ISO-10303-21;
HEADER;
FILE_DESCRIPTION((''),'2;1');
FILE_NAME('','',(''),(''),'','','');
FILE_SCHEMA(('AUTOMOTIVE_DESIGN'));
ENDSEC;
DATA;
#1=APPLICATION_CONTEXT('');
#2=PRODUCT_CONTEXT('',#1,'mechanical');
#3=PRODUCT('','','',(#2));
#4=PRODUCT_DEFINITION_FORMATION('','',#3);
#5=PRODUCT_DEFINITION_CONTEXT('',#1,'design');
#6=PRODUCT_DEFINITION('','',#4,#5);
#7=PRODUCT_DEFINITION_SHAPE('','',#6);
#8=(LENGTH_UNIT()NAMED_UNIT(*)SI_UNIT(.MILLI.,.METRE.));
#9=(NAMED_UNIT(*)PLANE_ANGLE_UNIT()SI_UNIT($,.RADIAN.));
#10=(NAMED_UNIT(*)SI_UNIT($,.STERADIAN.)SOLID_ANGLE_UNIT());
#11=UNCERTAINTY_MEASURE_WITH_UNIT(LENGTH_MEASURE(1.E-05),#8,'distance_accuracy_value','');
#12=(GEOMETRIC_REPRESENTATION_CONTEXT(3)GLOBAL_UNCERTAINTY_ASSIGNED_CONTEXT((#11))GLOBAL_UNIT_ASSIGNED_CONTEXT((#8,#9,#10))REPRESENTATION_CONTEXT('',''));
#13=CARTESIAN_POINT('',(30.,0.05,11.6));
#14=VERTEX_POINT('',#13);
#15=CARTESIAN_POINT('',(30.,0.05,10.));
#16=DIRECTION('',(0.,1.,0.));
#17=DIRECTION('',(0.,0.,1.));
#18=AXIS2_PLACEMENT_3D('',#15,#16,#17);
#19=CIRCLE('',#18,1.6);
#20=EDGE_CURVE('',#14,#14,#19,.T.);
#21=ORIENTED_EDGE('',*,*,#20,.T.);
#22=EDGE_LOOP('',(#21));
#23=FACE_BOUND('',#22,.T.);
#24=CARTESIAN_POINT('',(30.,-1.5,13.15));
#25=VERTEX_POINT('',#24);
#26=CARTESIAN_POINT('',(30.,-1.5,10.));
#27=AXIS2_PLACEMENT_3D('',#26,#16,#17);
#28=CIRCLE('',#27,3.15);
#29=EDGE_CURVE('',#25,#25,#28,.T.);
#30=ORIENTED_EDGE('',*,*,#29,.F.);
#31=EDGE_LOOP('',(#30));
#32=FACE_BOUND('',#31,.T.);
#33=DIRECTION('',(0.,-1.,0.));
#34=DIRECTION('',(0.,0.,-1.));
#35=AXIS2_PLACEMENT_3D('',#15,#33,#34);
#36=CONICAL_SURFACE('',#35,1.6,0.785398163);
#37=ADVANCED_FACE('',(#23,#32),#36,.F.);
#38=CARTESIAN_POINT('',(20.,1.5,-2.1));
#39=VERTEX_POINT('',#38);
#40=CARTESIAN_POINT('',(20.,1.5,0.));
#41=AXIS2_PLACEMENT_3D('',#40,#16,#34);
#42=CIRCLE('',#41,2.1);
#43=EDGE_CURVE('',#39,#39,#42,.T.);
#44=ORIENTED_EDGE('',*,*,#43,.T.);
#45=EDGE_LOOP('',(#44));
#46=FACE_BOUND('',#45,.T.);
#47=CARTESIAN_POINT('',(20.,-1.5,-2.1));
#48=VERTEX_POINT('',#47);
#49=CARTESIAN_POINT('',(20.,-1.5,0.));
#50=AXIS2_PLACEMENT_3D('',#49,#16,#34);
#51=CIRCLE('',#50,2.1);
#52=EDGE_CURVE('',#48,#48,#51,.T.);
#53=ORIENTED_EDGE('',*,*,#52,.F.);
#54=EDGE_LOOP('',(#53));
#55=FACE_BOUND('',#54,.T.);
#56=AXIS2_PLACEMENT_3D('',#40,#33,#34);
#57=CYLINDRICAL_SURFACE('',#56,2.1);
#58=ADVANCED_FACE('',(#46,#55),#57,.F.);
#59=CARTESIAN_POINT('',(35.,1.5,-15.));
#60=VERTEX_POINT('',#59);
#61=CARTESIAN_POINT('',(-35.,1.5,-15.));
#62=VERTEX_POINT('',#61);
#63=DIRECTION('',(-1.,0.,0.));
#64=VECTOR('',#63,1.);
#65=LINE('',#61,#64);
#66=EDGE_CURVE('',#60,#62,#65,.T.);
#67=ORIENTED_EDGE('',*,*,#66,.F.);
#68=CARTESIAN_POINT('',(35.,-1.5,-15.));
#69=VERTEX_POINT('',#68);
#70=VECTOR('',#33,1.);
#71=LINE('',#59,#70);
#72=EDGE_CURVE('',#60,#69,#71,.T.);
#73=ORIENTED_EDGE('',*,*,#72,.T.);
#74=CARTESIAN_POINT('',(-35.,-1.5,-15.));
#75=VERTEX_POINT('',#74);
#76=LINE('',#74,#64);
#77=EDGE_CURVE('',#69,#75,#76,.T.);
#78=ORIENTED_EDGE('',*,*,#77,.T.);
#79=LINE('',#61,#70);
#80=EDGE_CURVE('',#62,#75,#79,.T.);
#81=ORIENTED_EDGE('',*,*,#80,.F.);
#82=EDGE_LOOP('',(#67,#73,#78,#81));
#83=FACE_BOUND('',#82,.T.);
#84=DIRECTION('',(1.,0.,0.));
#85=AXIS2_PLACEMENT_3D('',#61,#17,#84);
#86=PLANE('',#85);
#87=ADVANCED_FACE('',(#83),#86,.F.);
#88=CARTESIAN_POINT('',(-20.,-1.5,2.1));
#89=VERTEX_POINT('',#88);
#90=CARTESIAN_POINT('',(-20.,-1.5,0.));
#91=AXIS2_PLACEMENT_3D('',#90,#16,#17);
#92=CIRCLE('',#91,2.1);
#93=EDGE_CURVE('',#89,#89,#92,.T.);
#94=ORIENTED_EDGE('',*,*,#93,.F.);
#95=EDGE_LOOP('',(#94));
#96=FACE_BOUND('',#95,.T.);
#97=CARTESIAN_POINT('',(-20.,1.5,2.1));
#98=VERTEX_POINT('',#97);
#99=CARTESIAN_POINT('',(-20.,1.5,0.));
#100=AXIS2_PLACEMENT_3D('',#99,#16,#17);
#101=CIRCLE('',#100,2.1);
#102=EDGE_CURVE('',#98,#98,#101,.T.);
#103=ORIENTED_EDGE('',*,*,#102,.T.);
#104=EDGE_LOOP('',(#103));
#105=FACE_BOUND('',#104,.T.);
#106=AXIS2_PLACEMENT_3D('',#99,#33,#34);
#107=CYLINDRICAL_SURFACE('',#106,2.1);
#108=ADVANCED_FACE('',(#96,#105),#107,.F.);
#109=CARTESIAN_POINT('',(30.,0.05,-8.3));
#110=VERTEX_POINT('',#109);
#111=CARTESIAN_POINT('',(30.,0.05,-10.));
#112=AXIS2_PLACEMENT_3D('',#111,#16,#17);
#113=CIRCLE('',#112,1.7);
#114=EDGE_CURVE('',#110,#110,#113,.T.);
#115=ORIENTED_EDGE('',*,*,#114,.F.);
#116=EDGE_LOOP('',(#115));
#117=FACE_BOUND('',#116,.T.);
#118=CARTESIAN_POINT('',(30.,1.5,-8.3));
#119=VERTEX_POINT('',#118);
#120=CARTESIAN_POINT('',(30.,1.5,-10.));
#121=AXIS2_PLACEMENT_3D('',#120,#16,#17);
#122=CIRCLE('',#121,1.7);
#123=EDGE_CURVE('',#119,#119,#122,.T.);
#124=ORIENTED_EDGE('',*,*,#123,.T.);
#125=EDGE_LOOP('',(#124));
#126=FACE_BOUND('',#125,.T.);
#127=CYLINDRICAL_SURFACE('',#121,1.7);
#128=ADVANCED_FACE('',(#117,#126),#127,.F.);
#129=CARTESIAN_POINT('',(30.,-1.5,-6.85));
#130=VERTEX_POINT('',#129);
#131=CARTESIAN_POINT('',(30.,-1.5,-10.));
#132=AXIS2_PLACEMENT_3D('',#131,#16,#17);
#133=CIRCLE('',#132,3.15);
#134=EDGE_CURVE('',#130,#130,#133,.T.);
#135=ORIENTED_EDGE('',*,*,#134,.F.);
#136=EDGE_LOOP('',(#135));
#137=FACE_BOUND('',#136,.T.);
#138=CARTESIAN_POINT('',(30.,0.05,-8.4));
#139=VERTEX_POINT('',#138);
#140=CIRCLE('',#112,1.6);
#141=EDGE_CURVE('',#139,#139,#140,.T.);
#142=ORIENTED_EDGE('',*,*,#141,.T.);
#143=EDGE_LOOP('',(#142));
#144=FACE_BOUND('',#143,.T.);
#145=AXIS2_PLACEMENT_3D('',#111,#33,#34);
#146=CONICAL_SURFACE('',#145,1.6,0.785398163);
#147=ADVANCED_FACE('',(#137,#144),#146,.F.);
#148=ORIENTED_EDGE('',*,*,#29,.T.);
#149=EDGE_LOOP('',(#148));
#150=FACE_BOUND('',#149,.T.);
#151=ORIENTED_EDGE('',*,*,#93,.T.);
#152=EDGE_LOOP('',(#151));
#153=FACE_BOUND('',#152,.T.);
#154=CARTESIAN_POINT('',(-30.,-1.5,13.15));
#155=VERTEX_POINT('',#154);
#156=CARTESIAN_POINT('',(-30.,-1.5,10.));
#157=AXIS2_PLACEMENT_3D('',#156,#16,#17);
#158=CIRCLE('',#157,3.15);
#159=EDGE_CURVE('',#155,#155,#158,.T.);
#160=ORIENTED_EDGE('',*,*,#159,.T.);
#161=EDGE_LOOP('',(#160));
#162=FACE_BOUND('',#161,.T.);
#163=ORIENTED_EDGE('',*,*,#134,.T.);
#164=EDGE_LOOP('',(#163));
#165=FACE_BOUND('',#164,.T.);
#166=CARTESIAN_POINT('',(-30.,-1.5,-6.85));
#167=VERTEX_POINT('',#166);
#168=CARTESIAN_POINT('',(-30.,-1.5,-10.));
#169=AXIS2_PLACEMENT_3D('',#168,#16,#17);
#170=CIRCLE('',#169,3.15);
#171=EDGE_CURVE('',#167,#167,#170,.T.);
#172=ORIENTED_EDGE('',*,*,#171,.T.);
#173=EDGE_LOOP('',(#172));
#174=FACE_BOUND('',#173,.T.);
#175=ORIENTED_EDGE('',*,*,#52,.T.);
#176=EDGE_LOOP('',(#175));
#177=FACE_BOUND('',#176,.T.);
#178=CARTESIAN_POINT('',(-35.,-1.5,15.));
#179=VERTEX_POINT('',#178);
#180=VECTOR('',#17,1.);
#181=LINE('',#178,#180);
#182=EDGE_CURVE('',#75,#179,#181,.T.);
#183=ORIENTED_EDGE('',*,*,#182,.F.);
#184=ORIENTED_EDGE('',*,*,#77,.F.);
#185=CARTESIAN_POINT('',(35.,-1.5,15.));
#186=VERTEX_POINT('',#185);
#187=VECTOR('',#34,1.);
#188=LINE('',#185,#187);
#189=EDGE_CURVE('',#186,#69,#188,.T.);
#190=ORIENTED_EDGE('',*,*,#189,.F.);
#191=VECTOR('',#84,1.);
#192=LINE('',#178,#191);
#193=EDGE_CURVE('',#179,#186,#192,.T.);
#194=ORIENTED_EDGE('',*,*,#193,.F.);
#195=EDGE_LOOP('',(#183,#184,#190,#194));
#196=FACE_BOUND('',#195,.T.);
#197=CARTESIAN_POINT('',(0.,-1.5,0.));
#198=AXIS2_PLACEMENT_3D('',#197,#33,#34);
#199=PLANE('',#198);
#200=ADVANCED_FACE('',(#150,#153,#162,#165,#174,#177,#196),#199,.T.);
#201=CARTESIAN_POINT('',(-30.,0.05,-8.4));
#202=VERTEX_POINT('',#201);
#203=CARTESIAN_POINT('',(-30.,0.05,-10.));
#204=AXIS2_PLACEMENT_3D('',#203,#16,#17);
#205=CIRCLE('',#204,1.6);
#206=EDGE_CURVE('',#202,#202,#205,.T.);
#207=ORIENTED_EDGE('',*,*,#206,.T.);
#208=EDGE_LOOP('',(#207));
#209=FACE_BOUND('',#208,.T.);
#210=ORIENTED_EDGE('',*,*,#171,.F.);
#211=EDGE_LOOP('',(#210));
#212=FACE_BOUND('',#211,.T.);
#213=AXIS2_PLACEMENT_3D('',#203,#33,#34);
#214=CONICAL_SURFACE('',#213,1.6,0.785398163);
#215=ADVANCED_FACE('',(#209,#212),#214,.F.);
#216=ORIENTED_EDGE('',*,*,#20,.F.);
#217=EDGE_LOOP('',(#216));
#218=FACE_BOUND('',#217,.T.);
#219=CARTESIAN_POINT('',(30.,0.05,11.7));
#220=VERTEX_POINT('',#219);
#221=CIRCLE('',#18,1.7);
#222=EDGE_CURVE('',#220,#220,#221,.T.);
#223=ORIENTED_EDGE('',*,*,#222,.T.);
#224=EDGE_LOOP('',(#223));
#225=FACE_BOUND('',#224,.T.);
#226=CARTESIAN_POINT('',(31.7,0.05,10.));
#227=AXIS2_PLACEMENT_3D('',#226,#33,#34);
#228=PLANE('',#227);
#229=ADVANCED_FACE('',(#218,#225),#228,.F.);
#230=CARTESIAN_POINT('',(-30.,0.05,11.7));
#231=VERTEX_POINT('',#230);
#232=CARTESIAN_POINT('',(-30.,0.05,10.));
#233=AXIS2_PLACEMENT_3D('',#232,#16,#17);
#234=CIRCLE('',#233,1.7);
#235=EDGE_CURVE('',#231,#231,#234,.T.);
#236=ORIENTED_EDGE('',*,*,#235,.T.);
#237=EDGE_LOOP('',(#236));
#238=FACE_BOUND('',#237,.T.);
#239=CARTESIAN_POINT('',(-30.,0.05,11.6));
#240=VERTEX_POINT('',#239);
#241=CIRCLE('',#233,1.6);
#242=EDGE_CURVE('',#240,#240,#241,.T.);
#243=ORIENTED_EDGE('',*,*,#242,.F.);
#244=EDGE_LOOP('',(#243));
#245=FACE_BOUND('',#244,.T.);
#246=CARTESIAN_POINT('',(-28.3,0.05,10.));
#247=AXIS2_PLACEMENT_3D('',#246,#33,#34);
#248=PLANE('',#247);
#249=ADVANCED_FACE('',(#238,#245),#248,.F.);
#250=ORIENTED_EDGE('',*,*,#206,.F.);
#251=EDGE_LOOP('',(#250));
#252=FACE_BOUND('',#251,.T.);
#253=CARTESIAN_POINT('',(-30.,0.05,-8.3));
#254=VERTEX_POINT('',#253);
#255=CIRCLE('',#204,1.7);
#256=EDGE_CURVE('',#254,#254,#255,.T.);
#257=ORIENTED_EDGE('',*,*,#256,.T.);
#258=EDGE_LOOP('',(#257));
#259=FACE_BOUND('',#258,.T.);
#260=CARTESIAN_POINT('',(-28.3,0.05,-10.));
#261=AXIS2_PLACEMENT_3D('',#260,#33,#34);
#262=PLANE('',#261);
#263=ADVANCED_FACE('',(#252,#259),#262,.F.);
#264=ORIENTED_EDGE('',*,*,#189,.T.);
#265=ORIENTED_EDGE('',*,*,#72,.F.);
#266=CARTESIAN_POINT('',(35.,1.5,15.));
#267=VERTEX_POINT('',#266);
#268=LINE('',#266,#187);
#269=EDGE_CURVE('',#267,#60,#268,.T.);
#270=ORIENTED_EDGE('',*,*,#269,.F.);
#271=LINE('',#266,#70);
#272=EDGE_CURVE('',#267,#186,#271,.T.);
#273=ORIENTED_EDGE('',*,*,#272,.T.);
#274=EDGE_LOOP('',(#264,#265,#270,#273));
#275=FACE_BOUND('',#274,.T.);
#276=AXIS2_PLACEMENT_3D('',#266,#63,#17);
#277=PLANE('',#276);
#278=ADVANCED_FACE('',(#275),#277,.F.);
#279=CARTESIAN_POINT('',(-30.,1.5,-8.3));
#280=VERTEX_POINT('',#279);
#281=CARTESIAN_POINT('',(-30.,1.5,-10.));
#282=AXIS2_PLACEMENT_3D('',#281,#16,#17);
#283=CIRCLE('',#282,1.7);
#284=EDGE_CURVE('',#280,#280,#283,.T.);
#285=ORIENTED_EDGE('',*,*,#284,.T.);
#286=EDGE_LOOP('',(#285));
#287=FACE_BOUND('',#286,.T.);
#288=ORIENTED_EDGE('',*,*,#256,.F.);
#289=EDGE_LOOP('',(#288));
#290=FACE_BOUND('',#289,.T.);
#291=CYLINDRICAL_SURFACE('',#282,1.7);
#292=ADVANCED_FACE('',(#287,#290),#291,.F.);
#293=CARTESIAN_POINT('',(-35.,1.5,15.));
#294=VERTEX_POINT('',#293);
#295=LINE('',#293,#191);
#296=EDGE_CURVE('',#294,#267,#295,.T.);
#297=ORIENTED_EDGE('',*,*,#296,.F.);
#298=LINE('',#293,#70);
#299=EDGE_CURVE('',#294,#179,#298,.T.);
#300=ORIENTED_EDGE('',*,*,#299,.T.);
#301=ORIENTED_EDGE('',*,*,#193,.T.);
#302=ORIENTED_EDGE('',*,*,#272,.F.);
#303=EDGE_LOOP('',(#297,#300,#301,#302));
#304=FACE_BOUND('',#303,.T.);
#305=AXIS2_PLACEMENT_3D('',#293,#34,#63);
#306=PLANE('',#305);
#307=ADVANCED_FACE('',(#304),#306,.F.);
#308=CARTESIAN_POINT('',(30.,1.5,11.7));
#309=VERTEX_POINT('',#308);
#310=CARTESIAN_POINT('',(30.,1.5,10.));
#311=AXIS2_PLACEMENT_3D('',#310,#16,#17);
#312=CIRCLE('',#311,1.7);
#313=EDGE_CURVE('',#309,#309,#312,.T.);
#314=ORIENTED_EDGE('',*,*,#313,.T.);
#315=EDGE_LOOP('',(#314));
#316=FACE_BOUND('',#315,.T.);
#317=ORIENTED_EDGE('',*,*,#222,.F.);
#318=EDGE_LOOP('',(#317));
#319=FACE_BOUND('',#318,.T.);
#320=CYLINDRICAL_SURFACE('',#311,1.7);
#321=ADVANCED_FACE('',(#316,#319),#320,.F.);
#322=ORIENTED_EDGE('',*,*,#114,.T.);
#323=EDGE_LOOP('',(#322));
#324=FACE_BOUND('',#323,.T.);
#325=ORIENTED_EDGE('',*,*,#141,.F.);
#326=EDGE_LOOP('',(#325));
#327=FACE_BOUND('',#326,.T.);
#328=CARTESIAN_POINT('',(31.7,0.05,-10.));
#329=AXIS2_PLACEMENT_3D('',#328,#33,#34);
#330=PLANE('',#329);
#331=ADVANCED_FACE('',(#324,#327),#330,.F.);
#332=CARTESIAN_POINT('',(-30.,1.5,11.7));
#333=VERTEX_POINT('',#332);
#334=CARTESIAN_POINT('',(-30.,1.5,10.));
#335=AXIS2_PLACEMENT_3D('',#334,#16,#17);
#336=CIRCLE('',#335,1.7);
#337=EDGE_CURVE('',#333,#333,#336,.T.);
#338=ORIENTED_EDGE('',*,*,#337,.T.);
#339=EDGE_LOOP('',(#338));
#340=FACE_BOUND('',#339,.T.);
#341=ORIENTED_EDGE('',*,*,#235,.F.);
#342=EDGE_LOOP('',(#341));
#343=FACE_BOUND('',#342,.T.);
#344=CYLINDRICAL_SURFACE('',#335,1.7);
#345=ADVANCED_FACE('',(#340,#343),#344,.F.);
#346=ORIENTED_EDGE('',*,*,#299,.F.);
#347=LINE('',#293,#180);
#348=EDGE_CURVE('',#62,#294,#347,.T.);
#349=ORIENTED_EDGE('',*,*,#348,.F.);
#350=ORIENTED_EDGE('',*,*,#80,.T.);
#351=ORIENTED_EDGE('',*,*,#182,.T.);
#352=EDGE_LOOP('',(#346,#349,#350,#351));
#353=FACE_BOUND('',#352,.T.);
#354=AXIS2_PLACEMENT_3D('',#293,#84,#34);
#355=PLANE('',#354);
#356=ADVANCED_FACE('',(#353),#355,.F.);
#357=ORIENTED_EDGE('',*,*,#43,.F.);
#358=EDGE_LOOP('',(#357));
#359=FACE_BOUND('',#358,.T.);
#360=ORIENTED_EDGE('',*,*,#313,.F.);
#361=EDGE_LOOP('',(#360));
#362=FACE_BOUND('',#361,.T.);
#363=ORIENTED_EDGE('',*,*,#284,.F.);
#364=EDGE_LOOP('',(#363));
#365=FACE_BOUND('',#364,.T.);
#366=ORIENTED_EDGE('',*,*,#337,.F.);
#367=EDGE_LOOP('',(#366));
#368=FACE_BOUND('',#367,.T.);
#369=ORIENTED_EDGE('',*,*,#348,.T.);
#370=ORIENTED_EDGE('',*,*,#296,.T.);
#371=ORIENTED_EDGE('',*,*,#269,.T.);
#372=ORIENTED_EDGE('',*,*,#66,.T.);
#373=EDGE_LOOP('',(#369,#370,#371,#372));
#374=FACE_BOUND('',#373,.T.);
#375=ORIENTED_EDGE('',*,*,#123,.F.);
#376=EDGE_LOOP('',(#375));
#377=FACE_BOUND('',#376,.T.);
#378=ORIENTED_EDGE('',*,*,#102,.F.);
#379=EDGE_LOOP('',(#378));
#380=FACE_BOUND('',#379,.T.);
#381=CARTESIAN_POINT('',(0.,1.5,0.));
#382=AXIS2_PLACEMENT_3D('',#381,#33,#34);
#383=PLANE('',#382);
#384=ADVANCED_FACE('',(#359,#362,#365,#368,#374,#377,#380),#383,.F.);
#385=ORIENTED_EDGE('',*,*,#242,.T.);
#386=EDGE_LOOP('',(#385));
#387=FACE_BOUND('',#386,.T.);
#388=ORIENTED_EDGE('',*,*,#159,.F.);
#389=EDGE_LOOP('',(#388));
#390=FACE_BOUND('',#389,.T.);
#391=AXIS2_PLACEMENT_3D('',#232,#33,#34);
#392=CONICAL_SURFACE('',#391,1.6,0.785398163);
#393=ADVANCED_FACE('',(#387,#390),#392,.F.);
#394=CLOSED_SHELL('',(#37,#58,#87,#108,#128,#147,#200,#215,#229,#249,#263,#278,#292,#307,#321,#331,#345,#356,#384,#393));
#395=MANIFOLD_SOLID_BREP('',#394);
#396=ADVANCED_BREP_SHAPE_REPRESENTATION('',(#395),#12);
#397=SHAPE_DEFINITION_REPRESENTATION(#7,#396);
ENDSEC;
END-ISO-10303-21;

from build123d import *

# Parameters (mm, degrees)
ESQUISSE1_W        = 70
ESQUISSE1_H        = 30
ESQUISSE1_R        = 2.1
BOSS_EXTRU_1_DEPTH = 1.5


# Read off the part's stored shape, not the designer's step: PerçageAvancé1
with BuildPart() as part:
    # Esquisse1 → Boss.-Extru.1 (new, symmetric)
    with BuildSketch(Plane(origin=(0, 0, 0), x_dir=(1, 0, 0), z_dir=(0, 1, 0))):
        Rectangle(ESQUISSE1_W, ESQUISSE1_H)
        with Locations(Location((-20, 0, 0), (0, 0, 270))):
            Circle(ESQUISSE1_R, mode=Mode.SUBTRACT)
        with Locations(Location((20, 0, 0), (0, 0, 90))):
            Circle(ESQUISSE1_R, mode=Mode.SUBTRACT)
    extrude(amount=BOSS_EXTRU_1_DEPTH, both=True)

    # PerçageAvancé1 outline → PerçageAvancé1 (revolve, cut)
    with BuildSketch(Plane(origin=(-30, 0, 10), x_dir=(1, 0, 0), z_dir=(0, 0, 1))):
        Polygon((1.6, 0.05), (1.7, 0.05), (1.7, 1.5), (0, 1.5), (0, -1.5), (3.15, -1.5), align=None)
    revolve(axis=Axis((-30, 0, 10), (0, 1, 0)), mode=Mode.SUBTRACT)

    # Per_ageAvanc_1 2 outline → Per_ageAvanc_1 2 (revolve, cut)
    with BuildSketch(Plane(origin=(30, 0, 10), x_dir=(1, 0, 0), z_dir=(0, 0, 1))):
        Polygon((1.6, 0.05), (1.7, 0.05), (1.7, 1.5), (0, 1.5), (0, -1.5), (3.15, -1.5), align=None)
    revolve(axis=Axis((30, 0, 10), (0, 1, 0)), mode=Mode.SUBTRACT)

    # Per_ageAvanc_1 3 outline → Per_ageAvanc_1 3 (revolve, cut)
    with BuildSketch(Plane(origin=(30, 0, -10), x_dir=(1, 0, 0), z_dir=(0, 0, 1))):
        Polygon((1.6, 0.05), (1.7, 0.05), (1.7, 1.5), (0, 1.5), (0, -1.5), (3.15, -1.5), align=None)
    revolve(axis=Axis((30, 0, -10), (0, 1, 0)), mode=Mode.SUBTRACT)

    # Per_ageAvanc_1 4 outline → Per_ageAvanc_1 4 (revolve, cut)
    with BuildSketch(Plane(origin=(-30, 0, -10), x_dir=(1, 0, 0), z_dir=(0, 0, 1))):
        Polygon((1.6, 0.05), (1.7, 0.05), (1.7, 1.5), (0, 1.5), (0, -1.5), (3.15, -1.5), align=None)
    revolve(axis=Axis((-30, 0, -10), (0, 1, 0)), mode=Mode.SUBTRACT)


solid = part.part
